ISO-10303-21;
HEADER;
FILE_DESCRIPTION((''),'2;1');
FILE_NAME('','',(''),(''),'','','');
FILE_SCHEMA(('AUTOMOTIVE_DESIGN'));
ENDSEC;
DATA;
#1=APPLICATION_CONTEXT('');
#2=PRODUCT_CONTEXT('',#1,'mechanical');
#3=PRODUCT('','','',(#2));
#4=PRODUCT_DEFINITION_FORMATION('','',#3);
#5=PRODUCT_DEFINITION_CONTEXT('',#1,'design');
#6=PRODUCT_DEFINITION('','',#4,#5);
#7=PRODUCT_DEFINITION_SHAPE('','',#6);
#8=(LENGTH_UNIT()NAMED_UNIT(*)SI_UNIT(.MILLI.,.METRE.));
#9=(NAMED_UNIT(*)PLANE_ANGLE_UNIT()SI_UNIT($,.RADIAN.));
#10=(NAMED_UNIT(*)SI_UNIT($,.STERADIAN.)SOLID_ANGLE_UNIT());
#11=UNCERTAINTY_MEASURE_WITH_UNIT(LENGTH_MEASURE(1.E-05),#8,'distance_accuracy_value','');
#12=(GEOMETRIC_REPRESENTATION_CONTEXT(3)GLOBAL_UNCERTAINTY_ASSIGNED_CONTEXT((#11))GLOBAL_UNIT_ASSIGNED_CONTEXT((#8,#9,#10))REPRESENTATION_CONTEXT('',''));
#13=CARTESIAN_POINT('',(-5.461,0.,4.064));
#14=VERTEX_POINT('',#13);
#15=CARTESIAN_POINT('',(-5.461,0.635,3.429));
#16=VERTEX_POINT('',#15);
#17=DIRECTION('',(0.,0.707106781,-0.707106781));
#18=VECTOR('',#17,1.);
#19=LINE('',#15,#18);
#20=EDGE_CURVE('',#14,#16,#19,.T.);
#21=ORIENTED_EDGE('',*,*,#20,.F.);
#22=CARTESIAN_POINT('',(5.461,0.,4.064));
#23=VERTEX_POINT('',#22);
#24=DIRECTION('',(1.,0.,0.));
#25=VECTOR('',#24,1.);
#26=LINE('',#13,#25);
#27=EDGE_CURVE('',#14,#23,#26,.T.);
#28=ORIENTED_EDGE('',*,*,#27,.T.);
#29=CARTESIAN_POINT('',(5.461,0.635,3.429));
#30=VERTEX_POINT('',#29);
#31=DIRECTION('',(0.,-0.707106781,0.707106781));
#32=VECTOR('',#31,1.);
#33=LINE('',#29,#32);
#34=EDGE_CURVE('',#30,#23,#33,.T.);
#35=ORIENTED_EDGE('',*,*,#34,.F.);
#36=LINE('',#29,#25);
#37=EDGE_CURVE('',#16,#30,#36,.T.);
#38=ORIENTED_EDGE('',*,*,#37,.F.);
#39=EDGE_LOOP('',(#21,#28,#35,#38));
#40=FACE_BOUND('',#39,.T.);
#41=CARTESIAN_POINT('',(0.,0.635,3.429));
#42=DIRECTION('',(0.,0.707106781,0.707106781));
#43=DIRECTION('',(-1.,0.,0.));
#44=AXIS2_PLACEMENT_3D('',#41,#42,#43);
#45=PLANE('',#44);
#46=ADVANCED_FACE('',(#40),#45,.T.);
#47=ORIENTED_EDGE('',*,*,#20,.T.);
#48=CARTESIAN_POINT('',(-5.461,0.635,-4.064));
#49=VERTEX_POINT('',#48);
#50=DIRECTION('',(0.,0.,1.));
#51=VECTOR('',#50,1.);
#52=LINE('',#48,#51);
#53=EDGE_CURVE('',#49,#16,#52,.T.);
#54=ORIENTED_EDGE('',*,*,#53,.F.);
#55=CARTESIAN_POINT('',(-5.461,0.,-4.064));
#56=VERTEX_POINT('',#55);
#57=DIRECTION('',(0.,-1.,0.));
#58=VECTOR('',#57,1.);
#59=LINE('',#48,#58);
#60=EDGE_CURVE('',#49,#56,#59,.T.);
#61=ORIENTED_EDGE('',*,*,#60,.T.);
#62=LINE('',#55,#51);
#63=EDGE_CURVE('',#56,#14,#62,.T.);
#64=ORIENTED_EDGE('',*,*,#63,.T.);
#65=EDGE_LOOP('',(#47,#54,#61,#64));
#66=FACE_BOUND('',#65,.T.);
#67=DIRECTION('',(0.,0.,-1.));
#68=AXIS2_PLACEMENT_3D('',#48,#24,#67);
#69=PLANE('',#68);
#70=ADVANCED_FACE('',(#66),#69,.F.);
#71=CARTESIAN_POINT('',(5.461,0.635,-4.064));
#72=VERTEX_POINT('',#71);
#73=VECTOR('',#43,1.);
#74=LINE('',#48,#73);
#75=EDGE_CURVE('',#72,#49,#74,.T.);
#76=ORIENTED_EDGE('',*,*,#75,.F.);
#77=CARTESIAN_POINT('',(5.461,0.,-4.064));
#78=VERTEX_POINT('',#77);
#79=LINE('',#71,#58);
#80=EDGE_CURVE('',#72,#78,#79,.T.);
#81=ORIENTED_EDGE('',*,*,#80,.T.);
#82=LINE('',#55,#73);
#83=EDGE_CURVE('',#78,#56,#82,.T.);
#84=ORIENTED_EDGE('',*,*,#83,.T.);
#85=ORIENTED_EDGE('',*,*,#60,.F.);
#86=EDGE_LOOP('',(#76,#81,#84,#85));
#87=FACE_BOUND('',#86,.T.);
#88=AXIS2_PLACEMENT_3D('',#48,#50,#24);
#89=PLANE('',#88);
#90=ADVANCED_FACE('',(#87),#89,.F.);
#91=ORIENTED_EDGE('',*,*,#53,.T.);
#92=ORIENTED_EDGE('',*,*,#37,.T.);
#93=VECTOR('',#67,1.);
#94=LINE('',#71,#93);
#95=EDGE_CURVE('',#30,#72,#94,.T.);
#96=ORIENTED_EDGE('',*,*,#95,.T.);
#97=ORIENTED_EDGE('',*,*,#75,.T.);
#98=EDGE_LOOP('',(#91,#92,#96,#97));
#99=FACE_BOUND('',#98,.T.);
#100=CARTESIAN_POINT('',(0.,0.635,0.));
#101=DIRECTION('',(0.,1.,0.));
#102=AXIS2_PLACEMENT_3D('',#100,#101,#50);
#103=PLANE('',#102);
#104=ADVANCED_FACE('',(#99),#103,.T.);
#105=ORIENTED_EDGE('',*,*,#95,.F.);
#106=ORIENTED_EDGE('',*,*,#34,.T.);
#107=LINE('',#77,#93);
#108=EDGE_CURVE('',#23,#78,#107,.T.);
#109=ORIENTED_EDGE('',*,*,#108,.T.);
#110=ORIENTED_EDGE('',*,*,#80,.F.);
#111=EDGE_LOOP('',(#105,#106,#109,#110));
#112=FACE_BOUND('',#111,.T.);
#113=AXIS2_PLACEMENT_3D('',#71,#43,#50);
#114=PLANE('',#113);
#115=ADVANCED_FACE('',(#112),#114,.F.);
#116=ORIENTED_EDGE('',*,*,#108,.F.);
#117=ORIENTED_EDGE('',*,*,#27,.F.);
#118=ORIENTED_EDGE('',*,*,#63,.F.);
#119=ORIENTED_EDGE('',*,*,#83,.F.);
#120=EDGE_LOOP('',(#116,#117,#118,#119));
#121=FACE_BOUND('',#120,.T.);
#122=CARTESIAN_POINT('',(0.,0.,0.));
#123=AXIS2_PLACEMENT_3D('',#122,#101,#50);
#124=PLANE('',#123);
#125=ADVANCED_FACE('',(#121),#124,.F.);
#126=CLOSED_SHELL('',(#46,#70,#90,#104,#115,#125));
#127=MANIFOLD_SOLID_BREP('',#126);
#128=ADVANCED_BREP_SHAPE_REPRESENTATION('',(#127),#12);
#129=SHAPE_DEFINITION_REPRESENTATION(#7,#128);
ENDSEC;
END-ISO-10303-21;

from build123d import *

# Parameters (mm, degrees)
SKETCH1_W           = 10.922
SKETCH1_H           = 8.128
BOSS_EXTRUDE1_DEPTH = 0.635
CHAMFER1_SIZE       = 0.635


with BuildPart() as part:
    # Sketch1 → Boss-Extrude1 (new body)
    with BuildSketch(Plane(origin=(0, 0, 0), x_dir=(1, 0, 0), z_dir=(0, 1, 0))):
        Rectangle(SKETCH1_W, SKETCH1_H)
    extrude(amount=BOSS_EXTRUDE1_DEPTH)

    # Chamfer1
    chamfer1_edges = [part.edges().sort_by_distance(p)[0] for p in [
        (0, 0.635, 4.064),
    ]]
    chamfer(chamfer1_edges, length=CHAMFER1_SIZE - 0.0001)  # a hair under: the kernel refuses the full size


solid = part.part
